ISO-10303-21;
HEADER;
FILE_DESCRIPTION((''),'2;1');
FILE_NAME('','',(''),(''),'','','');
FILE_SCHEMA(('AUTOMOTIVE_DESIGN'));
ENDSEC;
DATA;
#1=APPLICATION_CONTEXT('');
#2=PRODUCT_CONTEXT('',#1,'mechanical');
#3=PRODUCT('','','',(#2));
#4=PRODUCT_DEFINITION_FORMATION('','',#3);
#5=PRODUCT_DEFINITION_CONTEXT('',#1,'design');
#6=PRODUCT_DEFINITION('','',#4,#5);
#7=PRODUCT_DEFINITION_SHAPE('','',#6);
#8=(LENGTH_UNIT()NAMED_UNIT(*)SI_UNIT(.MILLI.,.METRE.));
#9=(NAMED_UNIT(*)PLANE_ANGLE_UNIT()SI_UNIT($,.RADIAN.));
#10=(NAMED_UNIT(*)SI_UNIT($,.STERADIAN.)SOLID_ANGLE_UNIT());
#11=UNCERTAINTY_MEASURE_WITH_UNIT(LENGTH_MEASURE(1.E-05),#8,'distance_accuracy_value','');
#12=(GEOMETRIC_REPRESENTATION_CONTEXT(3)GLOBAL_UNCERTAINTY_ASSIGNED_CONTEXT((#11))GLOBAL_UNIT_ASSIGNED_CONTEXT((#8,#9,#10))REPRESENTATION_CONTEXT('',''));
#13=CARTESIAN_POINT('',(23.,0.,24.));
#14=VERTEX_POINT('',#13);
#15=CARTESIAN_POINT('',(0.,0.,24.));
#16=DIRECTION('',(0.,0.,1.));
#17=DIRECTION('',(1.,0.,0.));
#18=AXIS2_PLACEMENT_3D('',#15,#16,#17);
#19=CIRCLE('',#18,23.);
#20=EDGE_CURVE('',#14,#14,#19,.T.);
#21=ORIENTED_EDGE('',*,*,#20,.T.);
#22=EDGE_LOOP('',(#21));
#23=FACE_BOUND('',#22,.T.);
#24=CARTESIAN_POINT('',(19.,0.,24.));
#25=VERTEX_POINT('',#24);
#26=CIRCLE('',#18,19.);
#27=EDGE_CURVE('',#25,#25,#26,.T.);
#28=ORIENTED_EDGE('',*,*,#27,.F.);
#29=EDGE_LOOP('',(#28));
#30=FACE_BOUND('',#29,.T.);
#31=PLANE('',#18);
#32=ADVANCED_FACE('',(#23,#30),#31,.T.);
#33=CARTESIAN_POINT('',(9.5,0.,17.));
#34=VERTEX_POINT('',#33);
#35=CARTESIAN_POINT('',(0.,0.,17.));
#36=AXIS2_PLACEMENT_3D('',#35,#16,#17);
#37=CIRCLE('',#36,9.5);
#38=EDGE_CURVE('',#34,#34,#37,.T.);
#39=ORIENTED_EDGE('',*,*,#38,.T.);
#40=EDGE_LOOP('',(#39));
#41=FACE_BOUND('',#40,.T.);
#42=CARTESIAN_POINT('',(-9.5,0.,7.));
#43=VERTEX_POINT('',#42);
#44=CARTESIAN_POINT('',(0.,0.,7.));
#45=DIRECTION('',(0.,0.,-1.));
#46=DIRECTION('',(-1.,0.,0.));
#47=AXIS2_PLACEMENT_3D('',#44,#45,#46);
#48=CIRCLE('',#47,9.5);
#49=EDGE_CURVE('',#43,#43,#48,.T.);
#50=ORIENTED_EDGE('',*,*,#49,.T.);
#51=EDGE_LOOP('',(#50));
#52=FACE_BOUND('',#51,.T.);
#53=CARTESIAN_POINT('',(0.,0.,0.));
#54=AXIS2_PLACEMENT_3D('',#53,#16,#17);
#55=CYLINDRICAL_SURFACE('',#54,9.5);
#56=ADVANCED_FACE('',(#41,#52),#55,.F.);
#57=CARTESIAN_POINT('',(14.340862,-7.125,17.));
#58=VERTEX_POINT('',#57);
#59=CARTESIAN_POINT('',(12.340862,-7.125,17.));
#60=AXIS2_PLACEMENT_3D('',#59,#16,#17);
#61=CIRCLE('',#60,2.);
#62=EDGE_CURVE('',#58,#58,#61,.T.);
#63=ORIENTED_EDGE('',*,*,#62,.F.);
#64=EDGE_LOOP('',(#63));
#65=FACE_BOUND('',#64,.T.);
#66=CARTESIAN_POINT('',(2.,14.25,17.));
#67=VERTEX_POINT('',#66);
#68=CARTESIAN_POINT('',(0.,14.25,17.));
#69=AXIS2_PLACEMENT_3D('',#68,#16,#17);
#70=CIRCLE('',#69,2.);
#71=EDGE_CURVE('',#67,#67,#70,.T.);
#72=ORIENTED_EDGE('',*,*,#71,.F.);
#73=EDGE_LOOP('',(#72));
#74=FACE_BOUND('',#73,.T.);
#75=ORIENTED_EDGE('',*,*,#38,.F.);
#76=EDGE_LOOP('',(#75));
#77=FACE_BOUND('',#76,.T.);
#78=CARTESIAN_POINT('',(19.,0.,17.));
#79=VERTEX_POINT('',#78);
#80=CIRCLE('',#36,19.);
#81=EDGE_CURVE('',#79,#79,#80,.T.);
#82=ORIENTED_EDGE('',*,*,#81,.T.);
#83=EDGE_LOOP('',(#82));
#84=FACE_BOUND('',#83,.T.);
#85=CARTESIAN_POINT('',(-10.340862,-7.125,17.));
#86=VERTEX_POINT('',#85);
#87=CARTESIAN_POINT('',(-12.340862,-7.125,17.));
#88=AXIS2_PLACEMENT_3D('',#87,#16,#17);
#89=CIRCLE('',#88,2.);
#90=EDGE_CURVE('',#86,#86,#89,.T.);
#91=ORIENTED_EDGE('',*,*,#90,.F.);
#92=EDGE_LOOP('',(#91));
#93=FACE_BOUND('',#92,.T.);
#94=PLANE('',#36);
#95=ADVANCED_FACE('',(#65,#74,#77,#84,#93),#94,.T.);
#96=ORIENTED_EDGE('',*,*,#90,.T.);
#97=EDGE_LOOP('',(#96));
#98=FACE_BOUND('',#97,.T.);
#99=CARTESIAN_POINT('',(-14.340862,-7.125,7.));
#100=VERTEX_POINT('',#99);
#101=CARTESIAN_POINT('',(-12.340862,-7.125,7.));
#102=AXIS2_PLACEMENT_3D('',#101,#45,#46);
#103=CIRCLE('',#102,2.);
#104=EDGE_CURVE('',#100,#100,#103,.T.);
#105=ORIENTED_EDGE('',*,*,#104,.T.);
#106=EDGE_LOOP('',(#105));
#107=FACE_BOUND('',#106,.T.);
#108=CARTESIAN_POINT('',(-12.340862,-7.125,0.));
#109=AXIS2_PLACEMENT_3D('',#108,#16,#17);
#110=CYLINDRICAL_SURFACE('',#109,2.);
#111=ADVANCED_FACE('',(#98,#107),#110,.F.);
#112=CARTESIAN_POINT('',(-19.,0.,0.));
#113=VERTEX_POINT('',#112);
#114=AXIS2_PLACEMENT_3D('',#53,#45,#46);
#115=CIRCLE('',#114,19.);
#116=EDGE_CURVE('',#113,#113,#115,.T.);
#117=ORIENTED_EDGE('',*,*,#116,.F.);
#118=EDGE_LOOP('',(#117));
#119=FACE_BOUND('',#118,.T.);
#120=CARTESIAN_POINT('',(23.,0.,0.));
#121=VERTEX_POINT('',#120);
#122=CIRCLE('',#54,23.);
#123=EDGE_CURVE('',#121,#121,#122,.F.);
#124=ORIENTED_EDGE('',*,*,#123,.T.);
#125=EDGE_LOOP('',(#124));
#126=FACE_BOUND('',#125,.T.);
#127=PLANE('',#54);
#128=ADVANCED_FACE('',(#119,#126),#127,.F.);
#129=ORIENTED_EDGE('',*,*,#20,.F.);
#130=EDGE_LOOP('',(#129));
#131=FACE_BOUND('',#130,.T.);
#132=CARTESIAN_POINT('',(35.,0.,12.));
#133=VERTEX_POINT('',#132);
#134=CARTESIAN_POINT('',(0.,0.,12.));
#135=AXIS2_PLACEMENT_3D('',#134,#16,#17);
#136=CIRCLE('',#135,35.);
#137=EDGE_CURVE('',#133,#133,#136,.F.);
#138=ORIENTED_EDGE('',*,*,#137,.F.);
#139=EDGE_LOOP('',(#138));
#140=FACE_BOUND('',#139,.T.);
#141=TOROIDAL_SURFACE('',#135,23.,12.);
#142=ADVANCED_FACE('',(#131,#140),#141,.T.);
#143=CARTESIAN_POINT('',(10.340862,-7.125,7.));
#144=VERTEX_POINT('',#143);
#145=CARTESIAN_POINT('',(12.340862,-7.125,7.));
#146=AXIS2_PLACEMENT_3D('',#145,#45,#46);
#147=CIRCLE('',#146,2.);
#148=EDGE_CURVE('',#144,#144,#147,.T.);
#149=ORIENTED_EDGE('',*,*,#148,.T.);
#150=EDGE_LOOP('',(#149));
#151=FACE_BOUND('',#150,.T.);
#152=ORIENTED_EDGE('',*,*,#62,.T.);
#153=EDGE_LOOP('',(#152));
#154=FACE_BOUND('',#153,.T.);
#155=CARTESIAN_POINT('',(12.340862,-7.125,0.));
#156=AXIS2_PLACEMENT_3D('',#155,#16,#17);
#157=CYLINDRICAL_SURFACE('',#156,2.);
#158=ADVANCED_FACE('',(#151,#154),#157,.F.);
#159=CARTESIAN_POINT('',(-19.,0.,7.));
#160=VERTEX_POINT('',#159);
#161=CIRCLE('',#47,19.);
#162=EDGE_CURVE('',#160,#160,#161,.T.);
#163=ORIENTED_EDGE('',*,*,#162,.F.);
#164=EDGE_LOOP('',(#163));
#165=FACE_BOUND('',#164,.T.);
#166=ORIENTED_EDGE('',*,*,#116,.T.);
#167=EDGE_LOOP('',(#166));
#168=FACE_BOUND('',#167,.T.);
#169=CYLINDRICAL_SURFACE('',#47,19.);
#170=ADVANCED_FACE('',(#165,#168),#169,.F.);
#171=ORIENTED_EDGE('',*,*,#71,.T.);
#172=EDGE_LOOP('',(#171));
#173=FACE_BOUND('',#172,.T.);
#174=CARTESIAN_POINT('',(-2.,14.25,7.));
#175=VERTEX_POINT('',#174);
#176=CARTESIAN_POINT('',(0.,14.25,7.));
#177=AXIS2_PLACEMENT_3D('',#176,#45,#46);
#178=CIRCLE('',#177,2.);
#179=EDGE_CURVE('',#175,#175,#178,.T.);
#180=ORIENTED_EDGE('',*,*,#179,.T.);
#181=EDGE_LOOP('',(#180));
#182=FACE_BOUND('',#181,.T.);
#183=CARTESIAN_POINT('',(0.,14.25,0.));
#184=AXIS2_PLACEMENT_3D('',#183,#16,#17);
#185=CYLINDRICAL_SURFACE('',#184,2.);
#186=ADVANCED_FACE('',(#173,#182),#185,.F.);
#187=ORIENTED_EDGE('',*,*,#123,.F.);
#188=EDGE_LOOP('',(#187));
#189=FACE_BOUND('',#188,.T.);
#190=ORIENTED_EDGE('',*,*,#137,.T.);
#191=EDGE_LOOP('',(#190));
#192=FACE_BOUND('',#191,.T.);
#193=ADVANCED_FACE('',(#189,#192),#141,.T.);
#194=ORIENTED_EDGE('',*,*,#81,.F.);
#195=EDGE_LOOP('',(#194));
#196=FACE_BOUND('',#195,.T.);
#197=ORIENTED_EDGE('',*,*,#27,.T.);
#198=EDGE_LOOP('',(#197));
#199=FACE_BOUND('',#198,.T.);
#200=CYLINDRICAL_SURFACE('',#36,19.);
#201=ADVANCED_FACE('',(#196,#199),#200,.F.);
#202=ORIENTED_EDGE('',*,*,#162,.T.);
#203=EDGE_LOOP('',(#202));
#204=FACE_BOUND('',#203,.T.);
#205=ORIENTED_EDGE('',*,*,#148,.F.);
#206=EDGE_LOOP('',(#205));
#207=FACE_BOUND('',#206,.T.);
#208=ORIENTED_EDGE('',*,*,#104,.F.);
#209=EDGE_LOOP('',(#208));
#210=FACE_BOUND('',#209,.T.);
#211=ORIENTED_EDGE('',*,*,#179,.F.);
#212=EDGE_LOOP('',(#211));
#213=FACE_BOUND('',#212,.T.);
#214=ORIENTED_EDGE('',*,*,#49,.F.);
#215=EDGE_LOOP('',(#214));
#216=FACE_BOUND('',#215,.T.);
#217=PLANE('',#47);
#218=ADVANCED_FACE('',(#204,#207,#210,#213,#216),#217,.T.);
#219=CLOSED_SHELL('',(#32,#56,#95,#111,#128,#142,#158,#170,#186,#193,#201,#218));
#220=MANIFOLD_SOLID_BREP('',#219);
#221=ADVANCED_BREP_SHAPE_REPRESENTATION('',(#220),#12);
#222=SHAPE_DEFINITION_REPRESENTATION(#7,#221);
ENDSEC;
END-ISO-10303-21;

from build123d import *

# Parameters (mm, degrees)
ESQUISSE1_R             = 35
EXTRUSION1_DEPTH        = 24
CONG_1_R                = 12
CONG_2_R                = 12
ESQUISSE2_R             = 19
ENL_V_MAT_EXTRU_1_DEPTH = 7
ENL_V_START             = -7
ESQUISSE3_R             = 19
ENL_V_MAT_EXTRU_2_DEPTH = 7
ESQUISSE5_R             = 9.5
ESQUISSE5_R_2           = 2
ENL_V_MAT_EXTRU_3_DEPTH = 53.335456499


with BuildPart() as part:
    # Esquisse1 → Extrusion1 (new body)
    with BuildSketch(Plane.XY):
        Circle(ESQUISSE1_R)
    extrude(amount=EXTRUSION1_DEPTH)

    # Congé1
    cong_1_edges = [part.edges().sort_by_distance(p)[0] for p in [
        (-35, 0, 24),
    ]]
    fillet(cong_1_edges, radius=CONG_1_R)

    # Congé2
    cong_2_edges = [part.edges().sort_by_distance(p)[0] for p in [
        (-35, 0, 0),
    ]]
    fillet(cong_2_edges, radius=CONG_2_R - 0.0001)  # a hair under: the kernel refuses the full size

    # Esquisse2 → Enlèv. mat.-Extru.1 (cut)
    with BuildSketch(Plane.XY.offset(24)):
        Circle(ESQUISSE2_R)
    extrude(amount=-ENL_V_MAT_EXTRU_1_DEPTH, mode=Mode.SUBTRACT)

    # Esquisse3 → Enlèv. mat.-Extru.2 (cut)
    with BuildSketch(Plane(origin=(0, 0, 0), x_dir=(-1, 0, 0), z_dir=(0, 0, -1)).offset(ENL_V_START)):
        with Locations(Location((0, 0, 0), (0, 0, 180))):
            Circle(ESQUISSE3_R)
    extrude(amount=ENL_V_MAT_EXTRU_2_DEPTH, mode=Mode.SUBTRACT)

    # Esquisse5 → Enlèv. mat.-Extru.3 (cut, through all)
    with BuildSketch(Plane.XY.offset(17)):
        Circle(ESQUISSE5_R)
        with Locations((0, 14.25)):
            Circle(ESQUISSE5_R_2)
        with Locations((12.340862004, -7.125)):
            Circle(ESQUISSE5_R_2)
        with Locations((-12.340862004, -7.125)):
            Circle(ESQUISSE5_R_2)
    extrude(amount=-ENL_V_MAT_EXTRU_3_DEPTH, mode=Mode.SUBTRACT)


solid = part.part
